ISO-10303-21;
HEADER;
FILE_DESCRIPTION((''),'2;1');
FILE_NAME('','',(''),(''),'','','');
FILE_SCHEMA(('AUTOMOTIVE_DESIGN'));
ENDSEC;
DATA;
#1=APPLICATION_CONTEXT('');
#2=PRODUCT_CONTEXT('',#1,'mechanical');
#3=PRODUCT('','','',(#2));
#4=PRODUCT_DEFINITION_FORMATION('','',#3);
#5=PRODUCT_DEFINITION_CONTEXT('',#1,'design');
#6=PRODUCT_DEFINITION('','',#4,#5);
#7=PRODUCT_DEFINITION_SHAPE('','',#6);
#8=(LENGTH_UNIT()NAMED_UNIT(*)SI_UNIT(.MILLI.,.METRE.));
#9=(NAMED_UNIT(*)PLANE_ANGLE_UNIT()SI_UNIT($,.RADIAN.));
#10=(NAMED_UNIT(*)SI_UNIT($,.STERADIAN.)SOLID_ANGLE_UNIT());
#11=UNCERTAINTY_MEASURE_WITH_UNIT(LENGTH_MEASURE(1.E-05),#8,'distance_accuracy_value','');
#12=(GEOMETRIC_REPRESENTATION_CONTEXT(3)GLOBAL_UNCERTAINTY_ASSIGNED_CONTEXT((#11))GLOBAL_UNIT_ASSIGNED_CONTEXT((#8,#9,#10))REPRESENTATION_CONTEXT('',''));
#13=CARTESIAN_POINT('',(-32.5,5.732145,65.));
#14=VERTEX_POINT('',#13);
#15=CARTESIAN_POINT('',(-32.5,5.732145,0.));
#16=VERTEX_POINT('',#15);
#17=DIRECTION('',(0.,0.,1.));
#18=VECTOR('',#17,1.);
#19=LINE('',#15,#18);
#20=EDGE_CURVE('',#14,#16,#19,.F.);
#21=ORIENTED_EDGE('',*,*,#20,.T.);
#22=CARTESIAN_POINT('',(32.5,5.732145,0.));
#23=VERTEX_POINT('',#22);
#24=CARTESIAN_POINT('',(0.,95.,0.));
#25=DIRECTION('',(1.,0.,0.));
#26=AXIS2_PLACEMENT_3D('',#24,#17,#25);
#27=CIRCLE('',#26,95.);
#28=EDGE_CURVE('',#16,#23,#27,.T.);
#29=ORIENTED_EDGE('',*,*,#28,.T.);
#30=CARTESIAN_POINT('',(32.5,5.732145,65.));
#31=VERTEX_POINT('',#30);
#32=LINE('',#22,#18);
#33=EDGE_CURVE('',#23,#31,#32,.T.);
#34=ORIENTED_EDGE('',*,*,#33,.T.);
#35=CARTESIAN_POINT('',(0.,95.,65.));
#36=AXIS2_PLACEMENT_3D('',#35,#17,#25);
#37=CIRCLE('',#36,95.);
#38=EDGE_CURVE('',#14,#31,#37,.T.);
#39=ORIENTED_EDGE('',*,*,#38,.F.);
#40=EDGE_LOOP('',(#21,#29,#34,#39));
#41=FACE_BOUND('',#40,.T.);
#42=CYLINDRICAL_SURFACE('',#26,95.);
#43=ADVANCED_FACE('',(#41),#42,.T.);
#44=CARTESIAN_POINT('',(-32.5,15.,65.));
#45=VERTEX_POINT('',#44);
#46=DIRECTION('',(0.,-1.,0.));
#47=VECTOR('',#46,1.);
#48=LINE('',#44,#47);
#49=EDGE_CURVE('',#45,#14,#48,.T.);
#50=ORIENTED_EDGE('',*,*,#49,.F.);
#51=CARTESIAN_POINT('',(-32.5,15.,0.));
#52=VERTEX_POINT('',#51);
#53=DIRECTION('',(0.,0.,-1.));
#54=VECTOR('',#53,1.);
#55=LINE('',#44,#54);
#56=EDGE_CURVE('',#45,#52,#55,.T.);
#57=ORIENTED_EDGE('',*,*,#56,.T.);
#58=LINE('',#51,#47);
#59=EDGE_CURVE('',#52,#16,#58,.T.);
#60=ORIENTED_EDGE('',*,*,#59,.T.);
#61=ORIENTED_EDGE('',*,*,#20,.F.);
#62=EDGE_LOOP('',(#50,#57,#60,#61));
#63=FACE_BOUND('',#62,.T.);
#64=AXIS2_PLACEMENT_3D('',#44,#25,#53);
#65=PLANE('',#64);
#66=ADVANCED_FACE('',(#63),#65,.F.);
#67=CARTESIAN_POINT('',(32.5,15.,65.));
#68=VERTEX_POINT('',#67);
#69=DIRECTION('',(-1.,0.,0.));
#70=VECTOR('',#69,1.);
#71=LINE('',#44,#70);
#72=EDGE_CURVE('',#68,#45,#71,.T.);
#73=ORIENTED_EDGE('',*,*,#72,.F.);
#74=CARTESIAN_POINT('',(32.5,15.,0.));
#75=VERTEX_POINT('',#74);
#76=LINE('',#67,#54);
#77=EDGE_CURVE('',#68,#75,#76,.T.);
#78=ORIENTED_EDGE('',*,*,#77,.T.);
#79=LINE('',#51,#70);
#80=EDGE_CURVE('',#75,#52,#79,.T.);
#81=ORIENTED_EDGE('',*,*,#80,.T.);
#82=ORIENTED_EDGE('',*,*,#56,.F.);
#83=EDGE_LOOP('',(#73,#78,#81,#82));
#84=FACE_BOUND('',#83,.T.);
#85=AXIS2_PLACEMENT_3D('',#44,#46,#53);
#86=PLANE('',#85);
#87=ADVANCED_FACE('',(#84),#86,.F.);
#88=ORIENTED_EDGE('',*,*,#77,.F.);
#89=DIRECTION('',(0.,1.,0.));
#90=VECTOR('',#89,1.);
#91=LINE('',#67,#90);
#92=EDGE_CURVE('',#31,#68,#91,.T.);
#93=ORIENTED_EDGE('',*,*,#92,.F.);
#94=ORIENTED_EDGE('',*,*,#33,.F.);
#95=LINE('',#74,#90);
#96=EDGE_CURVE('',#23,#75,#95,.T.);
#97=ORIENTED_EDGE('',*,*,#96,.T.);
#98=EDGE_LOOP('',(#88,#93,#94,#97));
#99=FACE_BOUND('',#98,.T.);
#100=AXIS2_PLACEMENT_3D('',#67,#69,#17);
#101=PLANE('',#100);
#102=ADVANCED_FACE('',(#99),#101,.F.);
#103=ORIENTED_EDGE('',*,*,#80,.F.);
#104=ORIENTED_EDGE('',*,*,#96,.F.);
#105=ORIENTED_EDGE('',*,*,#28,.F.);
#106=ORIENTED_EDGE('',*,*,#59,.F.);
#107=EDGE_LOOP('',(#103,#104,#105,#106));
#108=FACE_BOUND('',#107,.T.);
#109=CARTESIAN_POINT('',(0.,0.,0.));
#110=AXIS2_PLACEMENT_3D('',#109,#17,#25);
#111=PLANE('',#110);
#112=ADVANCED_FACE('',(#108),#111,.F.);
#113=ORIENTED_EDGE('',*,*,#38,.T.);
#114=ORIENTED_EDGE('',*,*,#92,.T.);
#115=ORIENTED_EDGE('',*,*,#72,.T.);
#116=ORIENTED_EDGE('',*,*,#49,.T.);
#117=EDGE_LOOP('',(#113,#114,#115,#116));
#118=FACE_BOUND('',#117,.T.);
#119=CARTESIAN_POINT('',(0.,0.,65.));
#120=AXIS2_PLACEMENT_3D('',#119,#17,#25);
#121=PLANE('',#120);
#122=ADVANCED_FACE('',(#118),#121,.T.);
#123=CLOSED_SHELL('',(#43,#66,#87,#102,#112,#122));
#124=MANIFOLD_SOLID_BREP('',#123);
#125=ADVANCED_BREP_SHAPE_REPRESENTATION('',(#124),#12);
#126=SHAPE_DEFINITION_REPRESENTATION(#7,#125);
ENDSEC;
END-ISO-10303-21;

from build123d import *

# Parameters (mm, degrees)
SKIZZE1_W                       = 65
SKIZZE1_H                       = 30
AUFSATZ_LINEAR_AUSTRAGEN1_DEPTH = 65
SCHNITT_LINEAR_START            = -65
SCHNITT_LINEAR_AUSTRAGEN1_DEPTH = 65


# Read off the part's stored shape, not the designer's step: Schnitt-Linear austragen1
with BuildPart() as part:
    # Skizze1 → Aufsatz-Linear austragen1 (new body)
    with BuildSketch(Plane.XY):
        Rectangle(SKIZZE1_W, SKIZZE1_H)
    extrude(amount=AUFSATZ_LINEAR_AUSTRAGEN1_DEPTH)

    # Schnitt-Linear austragen1 outline → Schnitt-Linear austragen1 (cut)
    with BuildSketch(Plane.XY.offset(65).offset(SCHNITT_LINEAR_START)):
        with BuildLine():
            ThreePointArc((32.5, 5.732144643), (0, 0), (-32.5, 5.732144643))
            Line((-32.5, 5.732144643), (-32.5, -15))
            Line((-32.5, -15), (32.5, -15))
            Line((32.5, -15), (32.5, 5.732144643))
        make_face()
    extrude(amount=SCHNITT_LINEAR_AUSTRAGEN1_DEPTH, mode=Mode.SUBTRACT)


solid = part.part
